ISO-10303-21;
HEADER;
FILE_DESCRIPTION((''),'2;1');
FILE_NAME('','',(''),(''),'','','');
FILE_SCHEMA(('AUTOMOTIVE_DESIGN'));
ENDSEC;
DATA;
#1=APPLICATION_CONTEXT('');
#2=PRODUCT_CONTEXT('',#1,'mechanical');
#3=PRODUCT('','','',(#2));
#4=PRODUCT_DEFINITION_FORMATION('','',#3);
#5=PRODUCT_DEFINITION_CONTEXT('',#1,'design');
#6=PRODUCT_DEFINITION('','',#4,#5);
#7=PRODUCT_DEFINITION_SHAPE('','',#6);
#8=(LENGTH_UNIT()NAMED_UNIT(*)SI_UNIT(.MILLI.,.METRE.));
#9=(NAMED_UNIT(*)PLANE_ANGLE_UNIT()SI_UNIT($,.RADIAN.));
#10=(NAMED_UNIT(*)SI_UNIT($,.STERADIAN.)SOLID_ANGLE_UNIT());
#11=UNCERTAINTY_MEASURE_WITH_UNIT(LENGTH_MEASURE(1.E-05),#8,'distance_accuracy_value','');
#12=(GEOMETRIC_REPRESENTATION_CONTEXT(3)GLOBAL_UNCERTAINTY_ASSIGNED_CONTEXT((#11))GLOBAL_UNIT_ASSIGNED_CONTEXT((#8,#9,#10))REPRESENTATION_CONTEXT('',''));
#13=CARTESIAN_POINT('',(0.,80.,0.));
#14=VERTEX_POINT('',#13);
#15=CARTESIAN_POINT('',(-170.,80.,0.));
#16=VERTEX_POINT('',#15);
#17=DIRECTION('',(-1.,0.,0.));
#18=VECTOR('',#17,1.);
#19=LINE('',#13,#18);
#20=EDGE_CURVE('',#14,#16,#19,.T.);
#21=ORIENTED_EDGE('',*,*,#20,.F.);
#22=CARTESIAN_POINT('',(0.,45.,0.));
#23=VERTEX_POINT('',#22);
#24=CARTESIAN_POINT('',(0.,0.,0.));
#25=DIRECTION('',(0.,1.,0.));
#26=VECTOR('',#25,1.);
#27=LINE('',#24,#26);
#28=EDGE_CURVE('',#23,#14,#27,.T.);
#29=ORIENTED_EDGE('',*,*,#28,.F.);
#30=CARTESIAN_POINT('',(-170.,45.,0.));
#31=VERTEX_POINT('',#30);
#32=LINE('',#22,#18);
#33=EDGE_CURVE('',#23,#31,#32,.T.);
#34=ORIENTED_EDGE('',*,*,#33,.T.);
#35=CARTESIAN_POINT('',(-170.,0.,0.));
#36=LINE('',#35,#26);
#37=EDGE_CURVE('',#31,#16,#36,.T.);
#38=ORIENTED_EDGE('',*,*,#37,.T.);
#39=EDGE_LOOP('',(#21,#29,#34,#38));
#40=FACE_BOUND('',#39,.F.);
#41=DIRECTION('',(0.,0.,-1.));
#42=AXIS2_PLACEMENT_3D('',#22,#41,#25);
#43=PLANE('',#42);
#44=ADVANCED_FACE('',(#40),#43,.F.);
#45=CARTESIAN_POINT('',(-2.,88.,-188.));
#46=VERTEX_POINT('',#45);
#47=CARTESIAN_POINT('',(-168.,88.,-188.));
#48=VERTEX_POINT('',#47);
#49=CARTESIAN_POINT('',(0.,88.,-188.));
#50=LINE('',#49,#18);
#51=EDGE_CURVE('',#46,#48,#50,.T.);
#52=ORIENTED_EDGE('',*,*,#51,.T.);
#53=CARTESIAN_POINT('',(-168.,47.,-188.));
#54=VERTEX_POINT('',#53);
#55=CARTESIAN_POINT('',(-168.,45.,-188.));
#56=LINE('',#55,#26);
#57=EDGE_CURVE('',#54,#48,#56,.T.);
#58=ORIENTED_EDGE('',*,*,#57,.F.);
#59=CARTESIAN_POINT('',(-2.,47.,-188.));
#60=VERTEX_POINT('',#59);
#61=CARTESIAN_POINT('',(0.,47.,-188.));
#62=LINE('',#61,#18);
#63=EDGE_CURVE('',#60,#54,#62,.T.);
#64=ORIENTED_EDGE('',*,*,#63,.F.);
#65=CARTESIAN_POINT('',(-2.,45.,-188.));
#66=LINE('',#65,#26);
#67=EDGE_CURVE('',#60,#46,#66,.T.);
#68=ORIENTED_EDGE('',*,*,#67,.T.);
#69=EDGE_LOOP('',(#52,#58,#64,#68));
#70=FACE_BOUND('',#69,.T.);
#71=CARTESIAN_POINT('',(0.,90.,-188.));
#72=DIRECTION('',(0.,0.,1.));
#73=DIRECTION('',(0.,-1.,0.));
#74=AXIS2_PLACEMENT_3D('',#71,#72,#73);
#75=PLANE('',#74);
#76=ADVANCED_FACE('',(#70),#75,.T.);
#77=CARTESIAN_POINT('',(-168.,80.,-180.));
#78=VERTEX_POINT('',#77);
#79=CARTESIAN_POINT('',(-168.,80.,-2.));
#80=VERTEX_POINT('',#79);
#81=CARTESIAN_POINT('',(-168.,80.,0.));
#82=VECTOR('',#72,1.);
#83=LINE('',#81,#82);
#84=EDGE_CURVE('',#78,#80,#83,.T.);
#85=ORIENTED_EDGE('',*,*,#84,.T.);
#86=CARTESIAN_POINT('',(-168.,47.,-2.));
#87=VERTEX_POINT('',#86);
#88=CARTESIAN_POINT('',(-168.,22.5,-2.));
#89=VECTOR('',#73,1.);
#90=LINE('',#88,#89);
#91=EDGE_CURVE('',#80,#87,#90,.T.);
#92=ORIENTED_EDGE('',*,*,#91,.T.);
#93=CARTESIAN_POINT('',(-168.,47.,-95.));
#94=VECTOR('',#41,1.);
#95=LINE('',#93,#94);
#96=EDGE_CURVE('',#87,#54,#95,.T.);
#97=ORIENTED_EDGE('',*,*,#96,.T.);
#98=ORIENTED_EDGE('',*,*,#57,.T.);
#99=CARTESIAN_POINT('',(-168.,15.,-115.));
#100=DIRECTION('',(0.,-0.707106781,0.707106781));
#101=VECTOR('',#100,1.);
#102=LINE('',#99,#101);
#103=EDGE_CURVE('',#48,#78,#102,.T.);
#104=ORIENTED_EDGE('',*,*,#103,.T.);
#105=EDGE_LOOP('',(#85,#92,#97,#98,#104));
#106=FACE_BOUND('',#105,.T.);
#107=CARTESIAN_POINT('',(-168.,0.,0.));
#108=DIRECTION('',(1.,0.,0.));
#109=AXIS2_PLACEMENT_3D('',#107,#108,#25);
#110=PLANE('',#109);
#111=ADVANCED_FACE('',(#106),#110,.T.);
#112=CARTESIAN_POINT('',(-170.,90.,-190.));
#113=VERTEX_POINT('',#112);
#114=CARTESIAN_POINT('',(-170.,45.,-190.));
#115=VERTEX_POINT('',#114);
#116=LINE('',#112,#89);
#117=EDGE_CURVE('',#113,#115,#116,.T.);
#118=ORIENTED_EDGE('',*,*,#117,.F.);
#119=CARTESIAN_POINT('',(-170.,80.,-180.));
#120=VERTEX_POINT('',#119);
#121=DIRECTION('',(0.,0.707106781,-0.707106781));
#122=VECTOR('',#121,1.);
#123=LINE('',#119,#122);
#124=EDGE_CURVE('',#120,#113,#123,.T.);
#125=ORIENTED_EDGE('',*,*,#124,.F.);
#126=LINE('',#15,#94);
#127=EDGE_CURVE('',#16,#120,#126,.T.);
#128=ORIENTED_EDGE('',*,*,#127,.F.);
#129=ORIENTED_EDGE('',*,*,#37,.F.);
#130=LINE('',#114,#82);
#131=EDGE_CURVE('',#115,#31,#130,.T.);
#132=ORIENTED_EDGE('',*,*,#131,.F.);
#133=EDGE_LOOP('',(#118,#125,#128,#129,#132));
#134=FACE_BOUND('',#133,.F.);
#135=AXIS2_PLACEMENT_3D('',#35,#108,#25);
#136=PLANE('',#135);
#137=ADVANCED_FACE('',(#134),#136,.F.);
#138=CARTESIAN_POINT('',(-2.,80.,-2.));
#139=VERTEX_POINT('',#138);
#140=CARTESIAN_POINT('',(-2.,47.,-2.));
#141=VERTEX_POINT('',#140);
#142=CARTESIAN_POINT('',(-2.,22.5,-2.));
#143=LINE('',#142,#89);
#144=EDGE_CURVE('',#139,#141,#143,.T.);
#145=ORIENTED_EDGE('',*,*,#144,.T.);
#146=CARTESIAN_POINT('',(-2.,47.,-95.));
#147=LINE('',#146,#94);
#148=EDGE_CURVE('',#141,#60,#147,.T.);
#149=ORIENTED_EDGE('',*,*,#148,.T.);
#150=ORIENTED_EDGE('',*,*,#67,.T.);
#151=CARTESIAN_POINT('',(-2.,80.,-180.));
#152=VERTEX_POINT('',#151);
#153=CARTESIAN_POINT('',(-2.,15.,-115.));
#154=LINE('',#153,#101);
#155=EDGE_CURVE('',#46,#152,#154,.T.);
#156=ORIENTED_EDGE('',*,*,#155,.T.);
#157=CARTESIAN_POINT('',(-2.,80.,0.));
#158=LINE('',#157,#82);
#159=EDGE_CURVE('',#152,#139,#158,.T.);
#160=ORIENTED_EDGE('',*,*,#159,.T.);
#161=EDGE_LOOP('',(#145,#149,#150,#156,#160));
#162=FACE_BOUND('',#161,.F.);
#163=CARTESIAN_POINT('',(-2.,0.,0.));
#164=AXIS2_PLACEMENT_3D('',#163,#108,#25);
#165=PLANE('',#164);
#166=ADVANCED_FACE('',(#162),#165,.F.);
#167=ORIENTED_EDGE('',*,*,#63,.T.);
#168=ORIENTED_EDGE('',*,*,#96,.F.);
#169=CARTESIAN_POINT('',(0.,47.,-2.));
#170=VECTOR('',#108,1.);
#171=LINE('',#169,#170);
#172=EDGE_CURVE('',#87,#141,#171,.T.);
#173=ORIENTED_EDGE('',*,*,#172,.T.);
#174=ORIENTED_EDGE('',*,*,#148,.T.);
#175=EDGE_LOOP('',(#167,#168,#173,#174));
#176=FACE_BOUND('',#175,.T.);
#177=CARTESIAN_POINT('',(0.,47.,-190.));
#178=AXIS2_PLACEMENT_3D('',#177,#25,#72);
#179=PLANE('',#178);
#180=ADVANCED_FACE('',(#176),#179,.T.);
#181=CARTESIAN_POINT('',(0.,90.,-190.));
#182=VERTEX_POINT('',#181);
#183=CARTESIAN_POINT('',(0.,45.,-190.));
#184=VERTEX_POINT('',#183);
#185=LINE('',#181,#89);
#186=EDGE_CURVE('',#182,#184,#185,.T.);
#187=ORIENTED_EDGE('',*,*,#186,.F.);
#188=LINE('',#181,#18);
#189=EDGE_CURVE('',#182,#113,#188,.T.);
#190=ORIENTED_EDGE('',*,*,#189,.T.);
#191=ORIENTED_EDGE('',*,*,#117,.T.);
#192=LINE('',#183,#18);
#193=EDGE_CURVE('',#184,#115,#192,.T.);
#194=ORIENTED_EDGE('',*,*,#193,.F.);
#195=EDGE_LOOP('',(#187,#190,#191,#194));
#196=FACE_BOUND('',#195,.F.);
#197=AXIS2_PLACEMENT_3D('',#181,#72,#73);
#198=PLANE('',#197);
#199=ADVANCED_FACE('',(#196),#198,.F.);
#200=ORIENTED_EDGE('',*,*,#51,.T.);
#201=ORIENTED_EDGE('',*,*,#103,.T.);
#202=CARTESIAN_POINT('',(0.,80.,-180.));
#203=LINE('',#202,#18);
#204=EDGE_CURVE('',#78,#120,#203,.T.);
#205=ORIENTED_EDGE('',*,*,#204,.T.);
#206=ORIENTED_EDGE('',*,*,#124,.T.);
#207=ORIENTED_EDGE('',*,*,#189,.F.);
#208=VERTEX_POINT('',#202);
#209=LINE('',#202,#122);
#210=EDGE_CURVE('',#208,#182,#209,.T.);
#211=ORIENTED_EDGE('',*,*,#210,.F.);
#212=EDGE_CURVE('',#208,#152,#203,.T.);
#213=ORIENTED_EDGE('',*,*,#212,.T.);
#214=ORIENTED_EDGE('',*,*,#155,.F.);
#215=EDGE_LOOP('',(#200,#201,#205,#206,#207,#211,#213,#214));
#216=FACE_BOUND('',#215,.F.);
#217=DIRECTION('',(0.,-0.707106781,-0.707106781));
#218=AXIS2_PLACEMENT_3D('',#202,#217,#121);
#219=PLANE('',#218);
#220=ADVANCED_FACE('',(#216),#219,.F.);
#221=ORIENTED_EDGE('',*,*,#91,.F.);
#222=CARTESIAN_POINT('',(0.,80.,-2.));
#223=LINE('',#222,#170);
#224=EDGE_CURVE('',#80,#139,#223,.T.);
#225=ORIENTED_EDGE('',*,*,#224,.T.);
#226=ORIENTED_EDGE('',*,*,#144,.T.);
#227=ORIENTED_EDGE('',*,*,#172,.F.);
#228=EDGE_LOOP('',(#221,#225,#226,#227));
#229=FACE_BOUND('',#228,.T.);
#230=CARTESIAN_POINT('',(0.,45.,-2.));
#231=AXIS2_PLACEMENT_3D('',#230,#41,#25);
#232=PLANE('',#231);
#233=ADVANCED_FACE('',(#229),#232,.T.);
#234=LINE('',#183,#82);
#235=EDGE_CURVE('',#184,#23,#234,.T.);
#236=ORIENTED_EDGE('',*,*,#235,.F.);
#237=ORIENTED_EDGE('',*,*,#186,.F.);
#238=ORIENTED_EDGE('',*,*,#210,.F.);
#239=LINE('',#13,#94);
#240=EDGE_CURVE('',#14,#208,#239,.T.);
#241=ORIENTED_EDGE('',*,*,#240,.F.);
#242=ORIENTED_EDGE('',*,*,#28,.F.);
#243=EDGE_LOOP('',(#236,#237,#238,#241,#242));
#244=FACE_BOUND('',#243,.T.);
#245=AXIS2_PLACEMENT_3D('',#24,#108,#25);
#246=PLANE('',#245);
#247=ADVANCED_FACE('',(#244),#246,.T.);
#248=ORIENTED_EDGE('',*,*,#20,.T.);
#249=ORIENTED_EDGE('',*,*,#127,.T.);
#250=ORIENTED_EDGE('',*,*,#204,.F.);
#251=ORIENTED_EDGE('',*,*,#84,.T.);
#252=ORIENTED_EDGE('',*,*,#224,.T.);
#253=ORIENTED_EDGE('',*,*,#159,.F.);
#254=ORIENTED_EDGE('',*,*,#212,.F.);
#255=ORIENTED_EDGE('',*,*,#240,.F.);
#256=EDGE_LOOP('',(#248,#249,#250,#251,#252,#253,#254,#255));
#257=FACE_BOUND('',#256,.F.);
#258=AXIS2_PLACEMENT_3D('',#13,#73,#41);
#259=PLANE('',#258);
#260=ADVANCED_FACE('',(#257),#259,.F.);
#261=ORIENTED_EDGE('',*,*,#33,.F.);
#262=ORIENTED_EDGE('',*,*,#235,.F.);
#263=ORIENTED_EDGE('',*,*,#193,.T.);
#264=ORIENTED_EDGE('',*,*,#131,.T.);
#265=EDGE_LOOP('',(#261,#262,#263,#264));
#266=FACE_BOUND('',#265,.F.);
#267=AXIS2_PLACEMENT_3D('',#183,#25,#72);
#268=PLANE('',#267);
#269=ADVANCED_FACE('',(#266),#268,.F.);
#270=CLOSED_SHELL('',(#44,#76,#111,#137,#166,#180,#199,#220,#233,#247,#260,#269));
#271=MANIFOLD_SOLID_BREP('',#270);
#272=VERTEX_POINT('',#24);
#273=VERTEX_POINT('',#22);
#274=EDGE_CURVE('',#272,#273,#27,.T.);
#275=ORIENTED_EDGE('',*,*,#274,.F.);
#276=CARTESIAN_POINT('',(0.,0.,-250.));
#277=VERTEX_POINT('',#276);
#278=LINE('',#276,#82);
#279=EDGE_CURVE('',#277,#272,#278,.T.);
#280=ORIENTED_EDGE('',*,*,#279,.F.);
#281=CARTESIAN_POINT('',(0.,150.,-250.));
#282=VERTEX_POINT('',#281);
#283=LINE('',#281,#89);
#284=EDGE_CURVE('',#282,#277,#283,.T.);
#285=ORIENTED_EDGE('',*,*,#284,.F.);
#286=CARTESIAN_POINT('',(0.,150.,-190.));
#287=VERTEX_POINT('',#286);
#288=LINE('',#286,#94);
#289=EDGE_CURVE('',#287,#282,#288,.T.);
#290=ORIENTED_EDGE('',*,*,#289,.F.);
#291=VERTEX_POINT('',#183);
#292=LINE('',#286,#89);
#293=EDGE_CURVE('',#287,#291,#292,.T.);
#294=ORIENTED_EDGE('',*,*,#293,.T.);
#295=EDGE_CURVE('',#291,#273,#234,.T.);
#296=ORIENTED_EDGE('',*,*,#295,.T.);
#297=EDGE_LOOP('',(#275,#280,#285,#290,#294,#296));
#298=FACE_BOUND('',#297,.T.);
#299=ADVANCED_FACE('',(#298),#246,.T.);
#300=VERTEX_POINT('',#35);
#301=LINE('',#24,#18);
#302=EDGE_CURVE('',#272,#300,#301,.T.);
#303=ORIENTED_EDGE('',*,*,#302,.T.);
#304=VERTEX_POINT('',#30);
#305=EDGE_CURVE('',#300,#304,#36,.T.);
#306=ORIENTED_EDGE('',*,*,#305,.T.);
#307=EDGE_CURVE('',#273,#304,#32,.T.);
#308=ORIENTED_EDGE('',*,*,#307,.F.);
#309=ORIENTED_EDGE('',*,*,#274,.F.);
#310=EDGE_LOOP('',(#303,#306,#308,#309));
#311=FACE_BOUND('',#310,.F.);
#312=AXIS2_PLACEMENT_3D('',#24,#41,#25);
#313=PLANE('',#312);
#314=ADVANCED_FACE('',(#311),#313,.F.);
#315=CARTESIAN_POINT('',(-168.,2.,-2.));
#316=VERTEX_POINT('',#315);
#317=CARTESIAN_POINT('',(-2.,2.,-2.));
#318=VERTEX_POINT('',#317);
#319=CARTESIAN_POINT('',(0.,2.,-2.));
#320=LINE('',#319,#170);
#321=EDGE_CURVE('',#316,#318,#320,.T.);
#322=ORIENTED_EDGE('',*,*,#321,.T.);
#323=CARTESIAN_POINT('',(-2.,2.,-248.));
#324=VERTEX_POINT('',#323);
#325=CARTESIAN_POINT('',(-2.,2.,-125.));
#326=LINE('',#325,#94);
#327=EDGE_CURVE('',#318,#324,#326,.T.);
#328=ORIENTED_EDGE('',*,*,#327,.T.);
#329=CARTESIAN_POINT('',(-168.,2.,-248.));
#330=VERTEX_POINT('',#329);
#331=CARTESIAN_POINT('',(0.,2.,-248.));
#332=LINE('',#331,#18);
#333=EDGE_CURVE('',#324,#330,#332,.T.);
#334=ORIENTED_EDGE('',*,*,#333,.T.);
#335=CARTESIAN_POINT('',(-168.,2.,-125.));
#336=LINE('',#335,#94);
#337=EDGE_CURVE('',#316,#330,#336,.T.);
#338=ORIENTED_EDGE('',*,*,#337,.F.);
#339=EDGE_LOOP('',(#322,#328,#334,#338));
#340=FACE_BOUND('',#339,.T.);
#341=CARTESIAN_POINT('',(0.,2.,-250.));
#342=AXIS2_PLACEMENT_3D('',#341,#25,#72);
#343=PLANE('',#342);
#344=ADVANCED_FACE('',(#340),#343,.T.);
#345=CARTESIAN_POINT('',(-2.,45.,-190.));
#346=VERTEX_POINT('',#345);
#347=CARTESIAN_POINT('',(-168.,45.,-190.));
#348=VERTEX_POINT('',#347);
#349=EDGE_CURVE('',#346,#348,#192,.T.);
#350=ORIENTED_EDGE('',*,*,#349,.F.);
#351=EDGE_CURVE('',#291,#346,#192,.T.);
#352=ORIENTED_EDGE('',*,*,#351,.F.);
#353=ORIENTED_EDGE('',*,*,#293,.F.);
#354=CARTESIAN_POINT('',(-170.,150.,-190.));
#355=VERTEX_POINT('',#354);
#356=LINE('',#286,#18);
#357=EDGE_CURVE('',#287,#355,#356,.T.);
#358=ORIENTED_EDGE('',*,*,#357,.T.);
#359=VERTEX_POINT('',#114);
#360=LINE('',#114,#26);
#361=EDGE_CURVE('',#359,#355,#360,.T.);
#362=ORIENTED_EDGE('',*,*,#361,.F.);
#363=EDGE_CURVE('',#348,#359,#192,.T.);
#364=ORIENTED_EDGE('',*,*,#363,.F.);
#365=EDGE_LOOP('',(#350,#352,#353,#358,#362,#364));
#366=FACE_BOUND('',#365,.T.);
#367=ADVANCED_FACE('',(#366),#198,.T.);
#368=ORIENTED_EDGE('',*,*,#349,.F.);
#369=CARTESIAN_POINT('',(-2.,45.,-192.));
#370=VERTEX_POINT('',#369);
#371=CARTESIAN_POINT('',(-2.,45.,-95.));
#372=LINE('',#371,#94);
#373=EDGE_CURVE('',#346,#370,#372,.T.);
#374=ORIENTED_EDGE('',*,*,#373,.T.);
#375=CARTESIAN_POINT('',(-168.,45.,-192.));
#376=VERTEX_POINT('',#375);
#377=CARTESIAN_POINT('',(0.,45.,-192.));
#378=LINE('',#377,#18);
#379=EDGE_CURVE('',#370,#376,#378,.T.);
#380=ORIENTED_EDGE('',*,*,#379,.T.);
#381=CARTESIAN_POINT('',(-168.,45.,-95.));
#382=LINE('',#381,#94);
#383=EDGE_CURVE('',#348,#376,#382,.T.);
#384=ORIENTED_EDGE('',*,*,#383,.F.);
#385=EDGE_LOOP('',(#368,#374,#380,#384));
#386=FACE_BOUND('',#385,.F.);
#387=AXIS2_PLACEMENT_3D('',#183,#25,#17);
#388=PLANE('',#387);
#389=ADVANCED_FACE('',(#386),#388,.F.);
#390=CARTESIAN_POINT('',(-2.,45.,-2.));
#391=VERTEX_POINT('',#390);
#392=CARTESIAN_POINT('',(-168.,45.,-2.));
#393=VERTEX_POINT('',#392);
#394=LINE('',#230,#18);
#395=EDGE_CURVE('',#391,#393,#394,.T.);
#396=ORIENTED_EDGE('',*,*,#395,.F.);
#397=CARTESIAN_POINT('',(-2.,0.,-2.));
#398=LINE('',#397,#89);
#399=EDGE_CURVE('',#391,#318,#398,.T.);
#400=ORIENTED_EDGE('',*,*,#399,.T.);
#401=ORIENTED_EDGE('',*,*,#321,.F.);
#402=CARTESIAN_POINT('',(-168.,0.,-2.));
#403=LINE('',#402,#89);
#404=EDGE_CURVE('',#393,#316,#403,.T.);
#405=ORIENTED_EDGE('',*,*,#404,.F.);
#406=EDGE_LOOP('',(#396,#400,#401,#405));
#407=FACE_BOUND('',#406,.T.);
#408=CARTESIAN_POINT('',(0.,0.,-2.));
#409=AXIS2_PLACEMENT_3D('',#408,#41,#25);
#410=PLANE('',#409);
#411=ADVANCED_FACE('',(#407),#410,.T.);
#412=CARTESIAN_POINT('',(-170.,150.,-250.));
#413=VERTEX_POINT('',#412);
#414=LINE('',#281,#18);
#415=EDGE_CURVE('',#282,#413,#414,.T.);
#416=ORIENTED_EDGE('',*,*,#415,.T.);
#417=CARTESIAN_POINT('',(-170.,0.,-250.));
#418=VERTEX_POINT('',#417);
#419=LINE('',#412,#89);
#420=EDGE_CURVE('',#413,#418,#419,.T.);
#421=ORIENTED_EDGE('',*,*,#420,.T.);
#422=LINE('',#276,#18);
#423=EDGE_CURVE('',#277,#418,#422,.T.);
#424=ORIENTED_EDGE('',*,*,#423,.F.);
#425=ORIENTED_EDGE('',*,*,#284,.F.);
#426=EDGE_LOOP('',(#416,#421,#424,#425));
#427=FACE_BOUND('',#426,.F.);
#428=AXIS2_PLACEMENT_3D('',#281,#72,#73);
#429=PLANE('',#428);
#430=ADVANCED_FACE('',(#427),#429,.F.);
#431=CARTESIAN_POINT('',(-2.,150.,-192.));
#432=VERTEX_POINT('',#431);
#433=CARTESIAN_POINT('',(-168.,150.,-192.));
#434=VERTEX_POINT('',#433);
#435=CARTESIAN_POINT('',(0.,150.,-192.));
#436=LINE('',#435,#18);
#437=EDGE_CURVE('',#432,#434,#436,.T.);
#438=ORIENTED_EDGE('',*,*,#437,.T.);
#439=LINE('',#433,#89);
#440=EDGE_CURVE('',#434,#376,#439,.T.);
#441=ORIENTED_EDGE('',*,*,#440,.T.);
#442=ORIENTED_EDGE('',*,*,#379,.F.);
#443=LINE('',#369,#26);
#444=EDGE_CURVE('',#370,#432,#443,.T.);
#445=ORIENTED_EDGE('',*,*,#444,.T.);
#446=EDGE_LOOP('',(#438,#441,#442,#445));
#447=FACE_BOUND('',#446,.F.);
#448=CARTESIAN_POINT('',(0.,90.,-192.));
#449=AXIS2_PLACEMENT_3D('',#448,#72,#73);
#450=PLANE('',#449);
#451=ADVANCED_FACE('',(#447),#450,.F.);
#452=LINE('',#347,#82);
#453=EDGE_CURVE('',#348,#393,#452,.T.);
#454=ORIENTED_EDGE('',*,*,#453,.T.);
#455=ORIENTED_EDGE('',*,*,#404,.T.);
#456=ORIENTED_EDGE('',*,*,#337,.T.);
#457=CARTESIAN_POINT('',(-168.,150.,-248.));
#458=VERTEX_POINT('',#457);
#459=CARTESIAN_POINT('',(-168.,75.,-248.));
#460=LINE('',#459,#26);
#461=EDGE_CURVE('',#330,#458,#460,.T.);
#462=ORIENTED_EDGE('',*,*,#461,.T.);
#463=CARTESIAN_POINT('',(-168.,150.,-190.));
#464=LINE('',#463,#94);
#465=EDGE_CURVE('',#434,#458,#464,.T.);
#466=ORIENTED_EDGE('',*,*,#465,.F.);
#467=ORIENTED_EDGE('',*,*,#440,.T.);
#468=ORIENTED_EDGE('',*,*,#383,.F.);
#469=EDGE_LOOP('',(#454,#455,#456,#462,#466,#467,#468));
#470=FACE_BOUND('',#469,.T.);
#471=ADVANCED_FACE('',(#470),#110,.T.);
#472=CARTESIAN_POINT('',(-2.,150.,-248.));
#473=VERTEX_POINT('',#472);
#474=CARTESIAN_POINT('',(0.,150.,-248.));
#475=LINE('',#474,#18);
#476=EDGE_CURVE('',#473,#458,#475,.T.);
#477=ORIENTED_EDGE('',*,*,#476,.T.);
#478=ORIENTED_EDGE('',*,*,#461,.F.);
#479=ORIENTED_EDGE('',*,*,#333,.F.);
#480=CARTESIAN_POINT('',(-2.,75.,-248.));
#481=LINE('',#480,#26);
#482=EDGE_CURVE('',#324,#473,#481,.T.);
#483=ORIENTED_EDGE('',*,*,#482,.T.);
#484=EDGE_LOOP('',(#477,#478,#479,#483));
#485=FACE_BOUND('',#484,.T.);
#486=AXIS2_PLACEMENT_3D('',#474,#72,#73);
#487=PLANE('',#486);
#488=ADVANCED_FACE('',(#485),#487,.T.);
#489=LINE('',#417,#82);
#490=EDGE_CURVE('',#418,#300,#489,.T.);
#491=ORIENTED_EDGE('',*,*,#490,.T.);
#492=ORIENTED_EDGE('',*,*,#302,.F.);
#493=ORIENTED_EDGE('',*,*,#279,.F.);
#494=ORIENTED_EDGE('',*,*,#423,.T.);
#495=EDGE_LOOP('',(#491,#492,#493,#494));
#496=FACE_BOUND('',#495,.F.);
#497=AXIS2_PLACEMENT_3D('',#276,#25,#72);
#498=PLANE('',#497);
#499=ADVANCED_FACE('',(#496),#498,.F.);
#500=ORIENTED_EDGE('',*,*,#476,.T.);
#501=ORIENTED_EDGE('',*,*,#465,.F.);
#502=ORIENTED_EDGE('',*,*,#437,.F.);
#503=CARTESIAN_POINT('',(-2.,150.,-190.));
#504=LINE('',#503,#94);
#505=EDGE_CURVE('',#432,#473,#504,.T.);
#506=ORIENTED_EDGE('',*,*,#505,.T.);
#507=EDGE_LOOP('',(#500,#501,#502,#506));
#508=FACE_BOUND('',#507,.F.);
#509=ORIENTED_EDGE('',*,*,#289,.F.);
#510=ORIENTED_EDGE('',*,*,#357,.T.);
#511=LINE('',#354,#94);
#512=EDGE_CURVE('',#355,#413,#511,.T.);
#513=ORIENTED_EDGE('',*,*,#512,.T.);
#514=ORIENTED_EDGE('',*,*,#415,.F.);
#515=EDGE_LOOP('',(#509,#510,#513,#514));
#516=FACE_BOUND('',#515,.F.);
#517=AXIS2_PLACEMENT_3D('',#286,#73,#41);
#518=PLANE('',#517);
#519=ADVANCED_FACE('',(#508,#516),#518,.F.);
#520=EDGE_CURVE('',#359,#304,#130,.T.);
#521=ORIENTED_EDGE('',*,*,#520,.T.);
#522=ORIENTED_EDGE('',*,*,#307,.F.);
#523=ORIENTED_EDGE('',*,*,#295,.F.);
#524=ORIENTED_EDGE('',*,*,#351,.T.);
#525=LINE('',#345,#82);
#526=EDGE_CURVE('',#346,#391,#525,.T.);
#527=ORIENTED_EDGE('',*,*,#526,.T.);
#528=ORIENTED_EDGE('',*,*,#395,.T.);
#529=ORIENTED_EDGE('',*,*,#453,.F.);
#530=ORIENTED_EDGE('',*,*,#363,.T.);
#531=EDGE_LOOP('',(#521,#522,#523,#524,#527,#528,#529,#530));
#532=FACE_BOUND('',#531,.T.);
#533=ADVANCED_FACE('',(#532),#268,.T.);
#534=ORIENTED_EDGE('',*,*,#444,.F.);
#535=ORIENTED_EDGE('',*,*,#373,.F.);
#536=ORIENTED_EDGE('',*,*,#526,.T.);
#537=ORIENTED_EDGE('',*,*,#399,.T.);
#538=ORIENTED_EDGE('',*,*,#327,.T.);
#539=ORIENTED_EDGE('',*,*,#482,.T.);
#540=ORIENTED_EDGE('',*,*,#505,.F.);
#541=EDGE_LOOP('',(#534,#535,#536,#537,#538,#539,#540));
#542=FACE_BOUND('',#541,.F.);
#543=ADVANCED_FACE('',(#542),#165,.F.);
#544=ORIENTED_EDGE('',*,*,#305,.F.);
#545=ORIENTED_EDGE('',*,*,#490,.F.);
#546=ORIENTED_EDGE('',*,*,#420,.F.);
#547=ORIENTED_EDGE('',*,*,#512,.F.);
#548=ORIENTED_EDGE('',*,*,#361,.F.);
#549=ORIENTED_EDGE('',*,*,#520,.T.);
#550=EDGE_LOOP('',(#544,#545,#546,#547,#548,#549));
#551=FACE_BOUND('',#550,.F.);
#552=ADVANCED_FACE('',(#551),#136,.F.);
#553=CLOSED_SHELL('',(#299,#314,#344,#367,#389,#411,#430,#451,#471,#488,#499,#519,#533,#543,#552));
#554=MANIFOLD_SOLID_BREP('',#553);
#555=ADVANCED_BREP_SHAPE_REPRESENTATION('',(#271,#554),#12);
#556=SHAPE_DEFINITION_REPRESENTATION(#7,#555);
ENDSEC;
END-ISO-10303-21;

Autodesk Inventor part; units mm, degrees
ref_plane "YZ Plane" through (0, 0, 0) normal (1, 0, 0) x (0, 1, 0)
ref_plane "XZ Plane" through (0, 0, 0) normal (0, 1, 0) x (-1, 0, 0)
ref_plane "XY Plane" through (0, 0, 0) normal (0, 0, 1) x (1, 0, 0)
sketch "Sketch1" plane through (0, 0, 0) normal (1, 0, 0) x (0, 1, 0)
  line L0 (0, 0) -> (80, 0)
  line L1 (80, 0) -> (80, -180)
  line L2 (80, -180) -> (90, -190)
  line L3 (90, -190) -> (150, -190)
  line L4 (150, -190) -> (150, -250)
  line L5 (150, -250) -> (0, -250)
  line L6 (0, -250) -> (0, 0)
  line L7 (45, 0) -> (235, 0) construction
  line L8 (45, -190) -> (45, 0)
  line L9 (90, -190) -> (45, -190)
  dimension "d1" = 150
  dimension "d2" = 60
  dimension "d3" = 180
  dimension "d4" = 80
  dimension "d6" = 250
  dimension "d11" = 35
extrude "Extrusion1" add sketch "Sketch1" against normal blind 170 contours L0 L8 L9 L3 L4 L5 L6
extrude "Extrusion2" add sketch "Sketch1" against normal blind 170 separate body contours L0 L1 L2 L9 L8
shell "Shell1" thickness 2 removed faces 2 at (-113.3333, 86.6667, -186.6667) at (-56.6667, 80, -120)
shell "Shell2" thickness 2 removed faces 3 at (-56.6667, 150, -230) at (-56.6667, 45, -126.6667) at (-56.6667, 45, -63.3333)
